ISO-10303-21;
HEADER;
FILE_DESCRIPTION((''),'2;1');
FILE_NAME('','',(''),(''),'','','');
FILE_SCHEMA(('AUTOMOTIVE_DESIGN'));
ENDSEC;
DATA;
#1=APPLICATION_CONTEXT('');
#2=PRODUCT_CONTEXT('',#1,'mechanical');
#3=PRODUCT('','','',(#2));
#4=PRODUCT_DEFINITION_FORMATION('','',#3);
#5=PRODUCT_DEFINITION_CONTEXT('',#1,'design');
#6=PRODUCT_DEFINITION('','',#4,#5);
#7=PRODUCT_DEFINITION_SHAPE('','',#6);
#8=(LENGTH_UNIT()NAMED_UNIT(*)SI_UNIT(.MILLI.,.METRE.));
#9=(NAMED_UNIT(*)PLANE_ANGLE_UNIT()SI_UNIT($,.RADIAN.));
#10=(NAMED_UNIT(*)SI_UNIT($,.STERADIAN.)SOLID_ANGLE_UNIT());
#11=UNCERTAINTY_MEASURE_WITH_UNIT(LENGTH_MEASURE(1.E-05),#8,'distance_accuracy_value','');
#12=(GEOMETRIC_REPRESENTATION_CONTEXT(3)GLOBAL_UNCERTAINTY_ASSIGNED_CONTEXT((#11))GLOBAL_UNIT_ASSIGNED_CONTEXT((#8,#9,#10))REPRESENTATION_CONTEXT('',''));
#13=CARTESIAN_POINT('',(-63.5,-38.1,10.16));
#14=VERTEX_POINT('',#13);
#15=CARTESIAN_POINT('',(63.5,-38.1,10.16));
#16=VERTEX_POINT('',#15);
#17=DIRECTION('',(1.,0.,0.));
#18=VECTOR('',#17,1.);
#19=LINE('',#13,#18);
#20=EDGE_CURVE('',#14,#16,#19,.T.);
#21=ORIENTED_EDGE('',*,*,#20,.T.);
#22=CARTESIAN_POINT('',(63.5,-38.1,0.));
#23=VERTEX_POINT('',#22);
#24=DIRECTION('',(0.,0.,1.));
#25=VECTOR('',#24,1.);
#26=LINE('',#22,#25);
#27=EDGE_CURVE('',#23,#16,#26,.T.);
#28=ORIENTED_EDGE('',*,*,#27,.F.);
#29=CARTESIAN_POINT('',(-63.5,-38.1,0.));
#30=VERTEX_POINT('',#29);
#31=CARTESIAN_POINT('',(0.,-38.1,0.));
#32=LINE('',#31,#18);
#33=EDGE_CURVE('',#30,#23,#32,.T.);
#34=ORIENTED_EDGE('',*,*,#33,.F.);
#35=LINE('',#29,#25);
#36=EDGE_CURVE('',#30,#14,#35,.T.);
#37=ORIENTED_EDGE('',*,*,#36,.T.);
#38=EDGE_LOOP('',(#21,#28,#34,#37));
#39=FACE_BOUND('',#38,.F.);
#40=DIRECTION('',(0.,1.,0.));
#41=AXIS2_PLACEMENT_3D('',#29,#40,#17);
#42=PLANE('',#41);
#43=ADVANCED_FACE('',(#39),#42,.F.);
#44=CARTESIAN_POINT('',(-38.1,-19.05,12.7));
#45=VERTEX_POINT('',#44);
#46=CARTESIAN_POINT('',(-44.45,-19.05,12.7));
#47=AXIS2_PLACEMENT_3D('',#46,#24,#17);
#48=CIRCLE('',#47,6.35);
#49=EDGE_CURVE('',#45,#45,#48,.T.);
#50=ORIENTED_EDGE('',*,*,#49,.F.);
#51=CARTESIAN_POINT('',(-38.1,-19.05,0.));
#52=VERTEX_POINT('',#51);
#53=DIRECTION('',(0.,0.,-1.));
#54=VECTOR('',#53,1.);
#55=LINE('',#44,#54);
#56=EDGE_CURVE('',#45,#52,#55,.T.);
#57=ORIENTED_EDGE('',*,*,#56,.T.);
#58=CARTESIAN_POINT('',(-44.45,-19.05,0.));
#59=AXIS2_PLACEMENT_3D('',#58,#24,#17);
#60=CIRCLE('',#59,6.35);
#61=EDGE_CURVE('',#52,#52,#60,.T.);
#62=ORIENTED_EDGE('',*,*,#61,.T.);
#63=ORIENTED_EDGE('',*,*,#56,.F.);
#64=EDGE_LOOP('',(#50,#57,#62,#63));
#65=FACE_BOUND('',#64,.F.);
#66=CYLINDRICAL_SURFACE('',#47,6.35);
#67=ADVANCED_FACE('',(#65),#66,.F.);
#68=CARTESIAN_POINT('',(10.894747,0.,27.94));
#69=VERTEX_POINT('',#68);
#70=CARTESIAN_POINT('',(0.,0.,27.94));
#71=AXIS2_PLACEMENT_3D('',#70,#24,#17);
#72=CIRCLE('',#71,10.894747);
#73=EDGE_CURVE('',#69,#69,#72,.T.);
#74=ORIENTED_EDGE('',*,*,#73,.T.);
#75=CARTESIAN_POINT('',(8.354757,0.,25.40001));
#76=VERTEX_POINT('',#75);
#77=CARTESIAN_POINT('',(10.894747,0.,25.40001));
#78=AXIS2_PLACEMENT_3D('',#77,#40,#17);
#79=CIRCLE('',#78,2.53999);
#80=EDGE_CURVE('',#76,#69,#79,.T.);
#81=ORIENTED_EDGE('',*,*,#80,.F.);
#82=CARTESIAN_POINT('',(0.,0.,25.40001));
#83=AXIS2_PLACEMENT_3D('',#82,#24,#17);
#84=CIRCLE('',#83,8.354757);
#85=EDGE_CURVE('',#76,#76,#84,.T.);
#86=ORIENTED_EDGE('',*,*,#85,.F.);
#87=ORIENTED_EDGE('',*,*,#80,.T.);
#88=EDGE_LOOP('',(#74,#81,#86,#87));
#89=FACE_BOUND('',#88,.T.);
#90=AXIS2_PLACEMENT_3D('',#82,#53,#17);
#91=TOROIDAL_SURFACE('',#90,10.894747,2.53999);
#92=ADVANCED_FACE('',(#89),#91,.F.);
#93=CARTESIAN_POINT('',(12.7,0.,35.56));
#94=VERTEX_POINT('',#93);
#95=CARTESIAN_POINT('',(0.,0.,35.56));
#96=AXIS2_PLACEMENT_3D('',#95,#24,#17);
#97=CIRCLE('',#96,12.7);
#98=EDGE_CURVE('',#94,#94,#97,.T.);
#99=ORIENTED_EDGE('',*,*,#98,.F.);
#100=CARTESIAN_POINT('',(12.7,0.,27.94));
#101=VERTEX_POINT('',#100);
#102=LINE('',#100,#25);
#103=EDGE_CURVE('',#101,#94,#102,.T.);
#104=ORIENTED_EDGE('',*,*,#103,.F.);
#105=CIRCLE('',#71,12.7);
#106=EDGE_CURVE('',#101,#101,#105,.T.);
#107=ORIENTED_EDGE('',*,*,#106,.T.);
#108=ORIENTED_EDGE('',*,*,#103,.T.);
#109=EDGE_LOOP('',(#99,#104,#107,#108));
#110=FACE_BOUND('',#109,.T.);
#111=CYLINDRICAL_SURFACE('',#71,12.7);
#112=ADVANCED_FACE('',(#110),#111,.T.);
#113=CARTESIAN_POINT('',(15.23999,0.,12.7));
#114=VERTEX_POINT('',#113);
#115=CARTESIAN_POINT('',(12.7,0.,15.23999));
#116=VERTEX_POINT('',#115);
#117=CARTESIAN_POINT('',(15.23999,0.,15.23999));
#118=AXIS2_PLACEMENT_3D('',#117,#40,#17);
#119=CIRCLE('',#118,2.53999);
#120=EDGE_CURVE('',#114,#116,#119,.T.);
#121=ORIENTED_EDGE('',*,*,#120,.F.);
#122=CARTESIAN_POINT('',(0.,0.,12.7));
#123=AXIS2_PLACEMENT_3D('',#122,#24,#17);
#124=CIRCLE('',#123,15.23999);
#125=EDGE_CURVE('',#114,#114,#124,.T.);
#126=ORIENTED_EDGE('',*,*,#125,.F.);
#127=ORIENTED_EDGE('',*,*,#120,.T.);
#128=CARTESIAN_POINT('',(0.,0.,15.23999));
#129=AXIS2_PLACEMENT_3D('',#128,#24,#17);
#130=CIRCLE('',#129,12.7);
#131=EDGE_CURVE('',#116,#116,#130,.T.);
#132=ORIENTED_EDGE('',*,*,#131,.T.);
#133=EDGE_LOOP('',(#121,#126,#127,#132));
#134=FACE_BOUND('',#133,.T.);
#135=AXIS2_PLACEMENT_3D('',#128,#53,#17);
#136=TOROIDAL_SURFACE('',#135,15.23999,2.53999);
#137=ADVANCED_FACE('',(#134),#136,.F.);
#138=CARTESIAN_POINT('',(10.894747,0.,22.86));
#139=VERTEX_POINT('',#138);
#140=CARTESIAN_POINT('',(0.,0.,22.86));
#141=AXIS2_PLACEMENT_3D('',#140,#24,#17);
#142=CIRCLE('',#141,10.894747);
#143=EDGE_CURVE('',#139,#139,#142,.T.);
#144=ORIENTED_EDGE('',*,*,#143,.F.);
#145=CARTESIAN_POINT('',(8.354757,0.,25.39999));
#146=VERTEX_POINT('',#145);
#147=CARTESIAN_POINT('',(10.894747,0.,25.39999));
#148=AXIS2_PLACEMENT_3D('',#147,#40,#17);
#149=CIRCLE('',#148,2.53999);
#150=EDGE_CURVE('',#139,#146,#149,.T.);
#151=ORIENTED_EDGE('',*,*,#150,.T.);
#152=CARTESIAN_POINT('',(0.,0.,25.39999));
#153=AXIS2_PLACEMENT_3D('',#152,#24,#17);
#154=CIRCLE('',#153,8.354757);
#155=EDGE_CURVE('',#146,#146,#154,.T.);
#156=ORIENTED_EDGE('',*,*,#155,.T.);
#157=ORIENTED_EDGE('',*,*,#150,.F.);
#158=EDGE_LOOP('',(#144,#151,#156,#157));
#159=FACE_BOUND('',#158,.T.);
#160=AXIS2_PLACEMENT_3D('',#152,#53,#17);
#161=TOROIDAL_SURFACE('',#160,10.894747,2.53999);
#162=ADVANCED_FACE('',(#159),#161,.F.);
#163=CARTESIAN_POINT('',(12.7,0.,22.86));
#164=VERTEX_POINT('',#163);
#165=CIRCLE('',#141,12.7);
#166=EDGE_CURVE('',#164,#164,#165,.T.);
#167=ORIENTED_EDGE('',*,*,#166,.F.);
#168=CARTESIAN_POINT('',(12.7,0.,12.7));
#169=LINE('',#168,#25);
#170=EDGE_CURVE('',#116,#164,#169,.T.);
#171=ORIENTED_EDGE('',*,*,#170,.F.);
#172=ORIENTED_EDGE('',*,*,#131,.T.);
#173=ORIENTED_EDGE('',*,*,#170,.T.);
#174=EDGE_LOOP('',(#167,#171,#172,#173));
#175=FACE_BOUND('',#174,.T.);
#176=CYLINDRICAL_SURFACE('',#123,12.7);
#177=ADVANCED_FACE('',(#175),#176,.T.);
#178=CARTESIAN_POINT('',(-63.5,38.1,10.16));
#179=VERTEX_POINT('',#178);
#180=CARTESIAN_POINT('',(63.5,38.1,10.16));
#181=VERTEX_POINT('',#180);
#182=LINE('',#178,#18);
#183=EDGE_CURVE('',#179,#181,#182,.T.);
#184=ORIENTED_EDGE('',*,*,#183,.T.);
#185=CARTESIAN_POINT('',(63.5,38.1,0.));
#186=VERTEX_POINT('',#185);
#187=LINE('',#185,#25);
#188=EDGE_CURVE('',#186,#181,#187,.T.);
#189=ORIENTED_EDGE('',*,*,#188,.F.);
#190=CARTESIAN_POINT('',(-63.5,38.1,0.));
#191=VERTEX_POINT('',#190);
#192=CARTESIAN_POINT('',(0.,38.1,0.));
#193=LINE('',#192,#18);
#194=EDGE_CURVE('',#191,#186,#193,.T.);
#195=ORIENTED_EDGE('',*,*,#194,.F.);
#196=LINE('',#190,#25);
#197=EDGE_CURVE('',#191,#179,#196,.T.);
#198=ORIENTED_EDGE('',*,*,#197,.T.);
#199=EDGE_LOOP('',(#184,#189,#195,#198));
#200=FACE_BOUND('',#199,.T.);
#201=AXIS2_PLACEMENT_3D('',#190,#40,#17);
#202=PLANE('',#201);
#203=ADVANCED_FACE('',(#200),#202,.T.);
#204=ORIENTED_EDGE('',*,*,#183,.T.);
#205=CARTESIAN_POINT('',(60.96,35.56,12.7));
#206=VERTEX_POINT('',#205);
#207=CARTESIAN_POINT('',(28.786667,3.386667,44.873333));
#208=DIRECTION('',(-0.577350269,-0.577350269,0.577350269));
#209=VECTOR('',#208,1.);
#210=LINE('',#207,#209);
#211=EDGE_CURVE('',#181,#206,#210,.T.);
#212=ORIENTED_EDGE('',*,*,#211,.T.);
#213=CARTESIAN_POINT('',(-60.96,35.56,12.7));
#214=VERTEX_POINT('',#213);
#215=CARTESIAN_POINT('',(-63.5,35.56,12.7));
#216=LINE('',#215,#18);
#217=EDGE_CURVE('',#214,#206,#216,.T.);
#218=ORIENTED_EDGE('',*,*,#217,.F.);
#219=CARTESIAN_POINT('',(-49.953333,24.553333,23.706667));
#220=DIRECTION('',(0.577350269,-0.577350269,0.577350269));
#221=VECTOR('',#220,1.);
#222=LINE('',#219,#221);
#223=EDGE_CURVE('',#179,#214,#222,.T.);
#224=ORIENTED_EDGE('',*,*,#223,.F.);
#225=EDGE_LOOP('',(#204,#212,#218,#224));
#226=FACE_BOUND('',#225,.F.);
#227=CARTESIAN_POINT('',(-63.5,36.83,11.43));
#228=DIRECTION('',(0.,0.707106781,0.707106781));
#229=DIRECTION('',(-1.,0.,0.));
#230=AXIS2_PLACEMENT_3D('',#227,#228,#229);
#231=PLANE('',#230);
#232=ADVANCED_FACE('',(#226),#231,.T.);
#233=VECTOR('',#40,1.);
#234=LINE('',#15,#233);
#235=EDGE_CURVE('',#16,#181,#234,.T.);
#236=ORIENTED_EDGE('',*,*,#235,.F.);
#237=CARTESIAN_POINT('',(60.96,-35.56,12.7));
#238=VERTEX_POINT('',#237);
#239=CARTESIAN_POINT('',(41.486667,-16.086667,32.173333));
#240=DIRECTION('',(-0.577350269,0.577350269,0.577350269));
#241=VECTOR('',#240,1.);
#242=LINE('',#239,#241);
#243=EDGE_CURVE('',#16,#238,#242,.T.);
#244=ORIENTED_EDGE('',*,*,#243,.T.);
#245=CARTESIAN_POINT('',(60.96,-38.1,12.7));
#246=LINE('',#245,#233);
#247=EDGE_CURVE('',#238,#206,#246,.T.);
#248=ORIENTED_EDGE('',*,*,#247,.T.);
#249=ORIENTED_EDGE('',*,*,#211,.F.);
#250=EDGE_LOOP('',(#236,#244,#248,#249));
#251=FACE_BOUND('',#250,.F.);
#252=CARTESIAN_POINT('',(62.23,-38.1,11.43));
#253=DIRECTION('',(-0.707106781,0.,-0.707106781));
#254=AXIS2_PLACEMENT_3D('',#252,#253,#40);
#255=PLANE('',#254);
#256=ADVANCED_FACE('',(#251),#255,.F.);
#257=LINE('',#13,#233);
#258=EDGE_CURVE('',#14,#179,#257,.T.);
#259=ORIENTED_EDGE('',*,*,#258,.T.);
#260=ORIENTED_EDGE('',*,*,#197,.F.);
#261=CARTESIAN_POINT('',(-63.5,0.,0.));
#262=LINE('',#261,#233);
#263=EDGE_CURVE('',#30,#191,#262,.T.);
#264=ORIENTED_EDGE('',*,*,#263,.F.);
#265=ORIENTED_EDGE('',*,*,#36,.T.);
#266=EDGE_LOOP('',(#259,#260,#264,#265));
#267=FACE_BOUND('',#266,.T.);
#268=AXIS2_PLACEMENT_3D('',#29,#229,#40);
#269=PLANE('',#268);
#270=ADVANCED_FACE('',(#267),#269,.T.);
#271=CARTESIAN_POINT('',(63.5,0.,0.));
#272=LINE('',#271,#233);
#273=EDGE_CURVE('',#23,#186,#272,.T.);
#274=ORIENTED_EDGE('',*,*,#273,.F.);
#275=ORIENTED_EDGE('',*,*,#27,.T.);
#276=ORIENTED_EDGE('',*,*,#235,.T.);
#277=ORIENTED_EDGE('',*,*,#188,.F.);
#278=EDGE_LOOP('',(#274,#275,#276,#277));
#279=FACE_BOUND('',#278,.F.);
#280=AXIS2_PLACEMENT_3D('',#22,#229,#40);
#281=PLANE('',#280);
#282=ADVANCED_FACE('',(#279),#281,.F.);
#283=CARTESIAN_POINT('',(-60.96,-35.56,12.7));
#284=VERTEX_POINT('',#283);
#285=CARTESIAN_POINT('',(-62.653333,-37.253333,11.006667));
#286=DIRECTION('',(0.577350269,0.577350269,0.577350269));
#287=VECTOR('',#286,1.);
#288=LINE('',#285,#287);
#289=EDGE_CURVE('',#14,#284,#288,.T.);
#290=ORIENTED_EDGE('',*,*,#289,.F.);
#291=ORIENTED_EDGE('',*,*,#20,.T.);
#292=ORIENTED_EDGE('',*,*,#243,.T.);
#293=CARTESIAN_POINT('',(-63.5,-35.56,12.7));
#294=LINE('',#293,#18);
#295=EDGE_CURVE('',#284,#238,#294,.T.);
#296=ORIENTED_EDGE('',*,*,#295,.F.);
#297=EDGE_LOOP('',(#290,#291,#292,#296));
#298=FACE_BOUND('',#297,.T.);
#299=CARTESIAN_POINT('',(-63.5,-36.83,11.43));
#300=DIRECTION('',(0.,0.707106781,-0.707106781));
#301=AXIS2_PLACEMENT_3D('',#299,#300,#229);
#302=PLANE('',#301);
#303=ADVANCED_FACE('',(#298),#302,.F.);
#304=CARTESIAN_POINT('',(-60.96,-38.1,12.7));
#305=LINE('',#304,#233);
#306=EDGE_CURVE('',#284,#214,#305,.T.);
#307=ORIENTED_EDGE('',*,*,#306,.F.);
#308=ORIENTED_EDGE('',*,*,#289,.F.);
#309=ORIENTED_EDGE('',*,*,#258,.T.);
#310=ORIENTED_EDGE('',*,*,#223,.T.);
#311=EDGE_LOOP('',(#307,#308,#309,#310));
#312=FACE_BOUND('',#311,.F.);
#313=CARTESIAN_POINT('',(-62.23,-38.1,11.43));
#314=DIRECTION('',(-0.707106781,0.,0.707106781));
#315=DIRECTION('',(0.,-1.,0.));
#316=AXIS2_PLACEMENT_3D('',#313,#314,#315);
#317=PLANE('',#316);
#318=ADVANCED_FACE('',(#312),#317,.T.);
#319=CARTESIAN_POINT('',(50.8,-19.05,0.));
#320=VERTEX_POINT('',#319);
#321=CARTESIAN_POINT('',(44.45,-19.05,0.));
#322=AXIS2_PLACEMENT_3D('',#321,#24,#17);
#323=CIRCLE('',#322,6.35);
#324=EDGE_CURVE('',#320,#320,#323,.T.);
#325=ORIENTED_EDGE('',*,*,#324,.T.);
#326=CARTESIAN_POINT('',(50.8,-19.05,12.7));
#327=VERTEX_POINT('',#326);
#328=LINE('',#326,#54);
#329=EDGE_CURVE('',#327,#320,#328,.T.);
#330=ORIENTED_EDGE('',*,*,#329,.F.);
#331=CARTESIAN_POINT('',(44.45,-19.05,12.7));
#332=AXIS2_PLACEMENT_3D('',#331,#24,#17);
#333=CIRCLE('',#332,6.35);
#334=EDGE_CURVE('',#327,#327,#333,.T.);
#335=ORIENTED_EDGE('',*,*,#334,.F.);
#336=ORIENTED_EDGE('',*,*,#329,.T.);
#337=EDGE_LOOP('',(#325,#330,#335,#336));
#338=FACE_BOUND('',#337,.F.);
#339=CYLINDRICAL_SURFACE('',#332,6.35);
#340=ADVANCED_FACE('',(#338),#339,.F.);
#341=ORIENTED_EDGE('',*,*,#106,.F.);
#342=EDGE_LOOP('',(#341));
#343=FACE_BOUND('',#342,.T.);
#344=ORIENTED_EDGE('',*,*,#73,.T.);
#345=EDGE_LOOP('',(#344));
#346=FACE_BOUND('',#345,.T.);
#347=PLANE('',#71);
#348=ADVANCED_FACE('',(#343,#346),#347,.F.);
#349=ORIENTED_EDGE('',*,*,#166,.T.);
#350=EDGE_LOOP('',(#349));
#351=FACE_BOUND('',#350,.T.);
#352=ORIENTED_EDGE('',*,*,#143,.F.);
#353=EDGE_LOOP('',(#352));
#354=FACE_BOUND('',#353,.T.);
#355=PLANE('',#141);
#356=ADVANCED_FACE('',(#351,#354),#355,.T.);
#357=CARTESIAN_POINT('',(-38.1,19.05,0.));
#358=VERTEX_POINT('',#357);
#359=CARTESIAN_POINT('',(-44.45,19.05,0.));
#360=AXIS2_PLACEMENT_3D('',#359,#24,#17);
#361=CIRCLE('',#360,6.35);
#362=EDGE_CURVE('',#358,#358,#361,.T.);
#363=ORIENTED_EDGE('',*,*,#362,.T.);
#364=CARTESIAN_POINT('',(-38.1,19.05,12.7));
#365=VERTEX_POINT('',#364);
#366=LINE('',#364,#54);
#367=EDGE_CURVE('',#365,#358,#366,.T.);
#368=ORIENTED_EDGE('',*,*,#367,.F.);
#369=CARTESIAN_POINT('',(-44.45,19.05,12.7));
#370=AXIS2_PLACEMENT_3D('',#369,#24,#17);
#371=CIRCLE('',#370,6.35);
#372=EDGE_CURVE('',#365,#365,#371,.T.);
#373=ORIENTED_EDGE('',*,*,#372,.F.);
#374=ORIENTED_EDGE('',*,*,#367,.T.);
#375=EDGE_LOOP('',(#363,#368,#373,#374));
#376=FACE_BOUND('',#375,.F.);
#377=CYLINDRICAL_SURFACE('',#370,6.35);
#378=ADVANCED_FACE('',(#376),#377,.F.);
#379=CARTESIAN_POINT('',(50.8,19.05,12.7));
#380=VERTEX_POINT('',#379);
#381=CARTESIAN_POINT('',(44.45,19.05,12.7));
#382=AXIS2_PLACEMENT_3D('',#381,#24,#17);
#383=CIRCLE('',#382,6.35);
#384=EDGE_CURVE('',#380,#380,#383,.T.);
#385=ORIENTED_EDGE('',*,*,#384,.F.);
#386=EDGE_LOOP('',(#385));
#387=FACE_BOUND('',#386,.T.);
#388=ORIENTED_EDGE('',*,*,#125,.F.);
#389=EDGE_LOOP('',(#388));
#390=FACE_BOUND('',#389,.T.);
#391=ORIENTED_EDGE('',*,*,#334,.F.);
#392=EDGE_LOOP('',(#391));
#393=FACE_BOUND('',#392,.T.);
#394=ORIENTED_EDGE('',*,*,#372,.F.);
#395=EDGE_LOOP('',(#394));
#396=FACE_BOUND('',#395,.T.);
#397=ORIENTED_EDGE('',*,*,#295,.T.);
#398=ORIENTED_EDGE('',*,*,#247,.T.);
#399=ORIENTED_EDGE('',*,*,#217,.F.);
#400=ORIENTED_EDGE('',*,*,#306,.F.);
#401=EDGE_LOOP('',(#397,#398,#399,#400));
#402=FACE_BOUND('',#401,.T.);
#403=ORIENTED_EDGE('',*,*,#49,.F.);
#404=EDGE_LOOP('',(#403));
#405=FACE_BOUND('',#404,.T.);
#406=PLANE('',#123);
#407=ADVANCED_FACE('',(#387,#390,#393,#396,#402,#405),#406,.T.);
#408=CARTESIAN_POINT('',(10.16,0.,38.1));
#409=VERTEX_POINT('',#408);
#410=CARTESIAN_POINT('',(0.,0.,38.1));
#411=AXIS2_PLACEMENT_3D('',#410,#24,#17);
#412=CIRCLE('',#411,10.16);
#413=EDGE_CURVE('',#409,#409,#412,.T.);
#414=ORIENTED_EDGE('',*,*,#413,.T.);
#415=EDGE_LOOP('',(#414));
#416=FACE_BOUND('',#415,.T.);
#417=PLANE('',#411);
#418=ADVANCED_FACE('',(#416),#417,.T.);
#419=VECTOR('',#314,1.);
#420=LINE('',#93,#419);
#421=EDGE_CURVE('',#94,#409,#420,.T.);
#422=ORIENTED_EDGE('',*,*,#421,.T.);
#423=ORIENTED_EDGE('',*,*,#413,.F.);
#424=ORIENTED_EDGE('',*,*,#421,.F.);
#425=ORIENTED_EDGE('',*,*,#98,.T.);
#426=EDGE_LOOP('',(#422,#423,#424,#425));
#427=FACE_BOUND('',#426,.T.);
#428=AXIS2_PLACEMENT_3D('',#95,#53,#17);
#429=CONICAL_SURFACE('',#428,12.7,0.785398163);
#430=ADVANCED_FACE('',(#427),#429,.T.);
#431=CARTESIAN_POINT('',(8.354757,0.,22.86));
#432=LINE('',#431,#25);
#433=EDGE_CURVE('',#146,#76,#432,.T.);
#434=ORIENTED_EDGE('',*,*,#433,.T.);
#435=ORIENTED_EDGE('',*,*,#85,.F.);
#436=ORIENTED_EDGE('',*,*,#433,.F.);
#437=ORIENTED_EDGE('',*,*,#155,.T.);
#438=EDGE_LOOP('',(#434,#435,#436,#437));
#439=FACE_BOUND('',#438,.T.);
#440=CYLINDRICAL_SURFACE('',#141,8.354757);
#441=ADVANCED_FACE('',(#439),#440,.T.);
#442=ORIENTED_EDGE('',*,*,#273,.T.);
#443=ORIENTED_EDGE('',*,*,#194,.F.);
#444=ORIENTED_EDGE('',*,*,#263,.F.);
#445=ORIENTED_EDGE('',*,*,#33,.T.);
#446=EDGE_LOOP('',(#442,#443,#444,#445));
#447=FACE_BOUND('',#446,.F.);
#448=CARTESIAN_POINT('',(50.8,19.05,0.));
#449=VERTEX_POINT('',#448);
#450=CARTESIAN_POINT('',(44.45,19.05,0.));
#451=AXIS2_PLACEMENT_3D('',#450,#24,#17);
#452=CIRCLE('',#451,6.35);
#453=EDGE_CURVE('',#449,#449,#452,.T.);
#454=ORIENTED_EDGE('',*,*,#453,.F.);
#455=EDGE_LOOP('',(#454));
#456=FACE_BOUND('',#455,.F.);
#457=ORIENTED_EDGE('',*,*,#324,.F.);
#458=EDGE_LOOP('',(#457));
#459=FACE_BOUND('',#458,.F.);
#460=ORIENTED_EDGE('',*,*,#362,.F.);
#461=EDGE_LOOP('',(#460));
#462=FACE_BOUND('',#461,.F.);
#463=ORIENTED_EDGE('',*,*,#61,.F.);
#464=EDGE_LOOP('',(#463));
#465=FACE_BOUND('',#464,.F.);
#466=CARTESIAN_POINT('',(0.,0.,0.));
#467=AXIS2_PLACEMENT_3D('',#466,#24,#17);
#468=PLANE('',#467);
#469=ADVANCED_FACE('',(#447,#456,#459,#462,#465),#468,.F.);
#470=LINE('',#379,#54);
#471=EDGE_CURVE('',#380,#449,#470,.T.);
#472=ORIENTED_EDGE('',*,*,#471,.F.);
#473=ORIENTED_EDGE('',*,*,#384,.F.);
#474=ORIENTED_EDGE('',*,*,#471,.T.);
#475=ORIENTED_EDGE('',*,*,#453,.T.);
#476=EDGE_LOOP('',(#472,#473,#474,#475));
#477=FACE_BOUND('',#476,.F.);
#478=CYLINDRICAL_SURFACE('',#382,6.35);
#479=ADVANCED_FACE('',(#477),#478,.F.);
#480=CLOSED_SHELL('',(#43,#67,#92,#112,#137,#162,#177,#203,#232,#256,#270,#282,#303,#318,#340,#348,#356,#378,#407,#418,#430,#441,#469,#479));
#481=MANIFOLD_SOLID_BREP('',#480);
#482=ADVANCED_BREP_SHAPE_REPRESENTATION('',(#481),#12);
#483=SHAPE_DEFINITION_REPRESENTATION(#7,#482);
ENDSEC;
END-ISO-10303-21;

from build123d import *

# Parameters (mm, degrees)
F0_W     = 127
F0_H     = 76.2
F1_DEPTH = 12.7
F2_R     = 6.35
F3_DEPTH = 12.701
F4_SIZE  = 2.54
F7_R     = 2.53999
F8_SIZE  = 2.54


# Not quite as in the source:
# - a fillet or chamfer is up to 0.001 mm smaller than in the source, because OpenCascade refuses the exact size


with BuildPart() as f1:
    # F0 (on Top) → F1 (new body)
    with BuildSketch(Plane.XY):
        Rectangle(F0_W, F0_H)
    extrude(amount=F1_DEPTH)

    # F2 (on face) → F3 (cut, through all)
    with BuildSketch(Plane.XY.offset(12.7)):
        with Locations((-44.45, 19.05)):
            Circle(F2_R)
        with Locations((44.45, 19.05)):
            Circle(F2_R)
        with Locations((44.45, -19.05)):
            Circle(F2_R)
        with Locations((-44.45, -19.05)):
            Circle(F2_R)
    extrude(amount=-F3_DEPTH, mode=Mode.SUBTRACT)

    # F4
    f4_edges = [f1.edges().sort_by_distance(p)[0] for p in [
        (-63.5, 0, 12.7),
        (0, 38.1, 12.7),
        (0, -38.1, 12.7),
        (63.5, 0, 12.7),
    ]]
    chamfer(f4_edges, length=F4_SIZE)

    # F5 (on Front) → F6 (revolve)
    with BuildSketch(Plane.XZ):
        Polygon((0, 38.1), (0, 12.7), (12.7, 12.7), (12.7, 22.86), (8.3547569811, 22.86), (8.3547569811, 27.94), (12.7, 27.94), (12.7, 38.1), align=None)
    revolve(axis=Axis((0, 0, 25.4), (0, 0, 1)))

    # F7 (radius 2.54 in the source; OpenCascade refuses exactly that, so slightly less here)
    f7_edges = [f1.edges().sort_by_distance(p)[0] for p in [
        (-12.7, 0, 12.7),
        (-8.354757, 0, 22.86),
        (-8.354757, 0, 27.94),
    ]]
    fillet(f7_edges, radius=F7_R)

    # F8
    f8_edges = [f1.edges().sort_by_distance(p)[0] for p in [
        (-12.7, 0, 38.1),
    ]]
    chamfer(f8_edges, length=F8_SIZE)


solid = f1.part
